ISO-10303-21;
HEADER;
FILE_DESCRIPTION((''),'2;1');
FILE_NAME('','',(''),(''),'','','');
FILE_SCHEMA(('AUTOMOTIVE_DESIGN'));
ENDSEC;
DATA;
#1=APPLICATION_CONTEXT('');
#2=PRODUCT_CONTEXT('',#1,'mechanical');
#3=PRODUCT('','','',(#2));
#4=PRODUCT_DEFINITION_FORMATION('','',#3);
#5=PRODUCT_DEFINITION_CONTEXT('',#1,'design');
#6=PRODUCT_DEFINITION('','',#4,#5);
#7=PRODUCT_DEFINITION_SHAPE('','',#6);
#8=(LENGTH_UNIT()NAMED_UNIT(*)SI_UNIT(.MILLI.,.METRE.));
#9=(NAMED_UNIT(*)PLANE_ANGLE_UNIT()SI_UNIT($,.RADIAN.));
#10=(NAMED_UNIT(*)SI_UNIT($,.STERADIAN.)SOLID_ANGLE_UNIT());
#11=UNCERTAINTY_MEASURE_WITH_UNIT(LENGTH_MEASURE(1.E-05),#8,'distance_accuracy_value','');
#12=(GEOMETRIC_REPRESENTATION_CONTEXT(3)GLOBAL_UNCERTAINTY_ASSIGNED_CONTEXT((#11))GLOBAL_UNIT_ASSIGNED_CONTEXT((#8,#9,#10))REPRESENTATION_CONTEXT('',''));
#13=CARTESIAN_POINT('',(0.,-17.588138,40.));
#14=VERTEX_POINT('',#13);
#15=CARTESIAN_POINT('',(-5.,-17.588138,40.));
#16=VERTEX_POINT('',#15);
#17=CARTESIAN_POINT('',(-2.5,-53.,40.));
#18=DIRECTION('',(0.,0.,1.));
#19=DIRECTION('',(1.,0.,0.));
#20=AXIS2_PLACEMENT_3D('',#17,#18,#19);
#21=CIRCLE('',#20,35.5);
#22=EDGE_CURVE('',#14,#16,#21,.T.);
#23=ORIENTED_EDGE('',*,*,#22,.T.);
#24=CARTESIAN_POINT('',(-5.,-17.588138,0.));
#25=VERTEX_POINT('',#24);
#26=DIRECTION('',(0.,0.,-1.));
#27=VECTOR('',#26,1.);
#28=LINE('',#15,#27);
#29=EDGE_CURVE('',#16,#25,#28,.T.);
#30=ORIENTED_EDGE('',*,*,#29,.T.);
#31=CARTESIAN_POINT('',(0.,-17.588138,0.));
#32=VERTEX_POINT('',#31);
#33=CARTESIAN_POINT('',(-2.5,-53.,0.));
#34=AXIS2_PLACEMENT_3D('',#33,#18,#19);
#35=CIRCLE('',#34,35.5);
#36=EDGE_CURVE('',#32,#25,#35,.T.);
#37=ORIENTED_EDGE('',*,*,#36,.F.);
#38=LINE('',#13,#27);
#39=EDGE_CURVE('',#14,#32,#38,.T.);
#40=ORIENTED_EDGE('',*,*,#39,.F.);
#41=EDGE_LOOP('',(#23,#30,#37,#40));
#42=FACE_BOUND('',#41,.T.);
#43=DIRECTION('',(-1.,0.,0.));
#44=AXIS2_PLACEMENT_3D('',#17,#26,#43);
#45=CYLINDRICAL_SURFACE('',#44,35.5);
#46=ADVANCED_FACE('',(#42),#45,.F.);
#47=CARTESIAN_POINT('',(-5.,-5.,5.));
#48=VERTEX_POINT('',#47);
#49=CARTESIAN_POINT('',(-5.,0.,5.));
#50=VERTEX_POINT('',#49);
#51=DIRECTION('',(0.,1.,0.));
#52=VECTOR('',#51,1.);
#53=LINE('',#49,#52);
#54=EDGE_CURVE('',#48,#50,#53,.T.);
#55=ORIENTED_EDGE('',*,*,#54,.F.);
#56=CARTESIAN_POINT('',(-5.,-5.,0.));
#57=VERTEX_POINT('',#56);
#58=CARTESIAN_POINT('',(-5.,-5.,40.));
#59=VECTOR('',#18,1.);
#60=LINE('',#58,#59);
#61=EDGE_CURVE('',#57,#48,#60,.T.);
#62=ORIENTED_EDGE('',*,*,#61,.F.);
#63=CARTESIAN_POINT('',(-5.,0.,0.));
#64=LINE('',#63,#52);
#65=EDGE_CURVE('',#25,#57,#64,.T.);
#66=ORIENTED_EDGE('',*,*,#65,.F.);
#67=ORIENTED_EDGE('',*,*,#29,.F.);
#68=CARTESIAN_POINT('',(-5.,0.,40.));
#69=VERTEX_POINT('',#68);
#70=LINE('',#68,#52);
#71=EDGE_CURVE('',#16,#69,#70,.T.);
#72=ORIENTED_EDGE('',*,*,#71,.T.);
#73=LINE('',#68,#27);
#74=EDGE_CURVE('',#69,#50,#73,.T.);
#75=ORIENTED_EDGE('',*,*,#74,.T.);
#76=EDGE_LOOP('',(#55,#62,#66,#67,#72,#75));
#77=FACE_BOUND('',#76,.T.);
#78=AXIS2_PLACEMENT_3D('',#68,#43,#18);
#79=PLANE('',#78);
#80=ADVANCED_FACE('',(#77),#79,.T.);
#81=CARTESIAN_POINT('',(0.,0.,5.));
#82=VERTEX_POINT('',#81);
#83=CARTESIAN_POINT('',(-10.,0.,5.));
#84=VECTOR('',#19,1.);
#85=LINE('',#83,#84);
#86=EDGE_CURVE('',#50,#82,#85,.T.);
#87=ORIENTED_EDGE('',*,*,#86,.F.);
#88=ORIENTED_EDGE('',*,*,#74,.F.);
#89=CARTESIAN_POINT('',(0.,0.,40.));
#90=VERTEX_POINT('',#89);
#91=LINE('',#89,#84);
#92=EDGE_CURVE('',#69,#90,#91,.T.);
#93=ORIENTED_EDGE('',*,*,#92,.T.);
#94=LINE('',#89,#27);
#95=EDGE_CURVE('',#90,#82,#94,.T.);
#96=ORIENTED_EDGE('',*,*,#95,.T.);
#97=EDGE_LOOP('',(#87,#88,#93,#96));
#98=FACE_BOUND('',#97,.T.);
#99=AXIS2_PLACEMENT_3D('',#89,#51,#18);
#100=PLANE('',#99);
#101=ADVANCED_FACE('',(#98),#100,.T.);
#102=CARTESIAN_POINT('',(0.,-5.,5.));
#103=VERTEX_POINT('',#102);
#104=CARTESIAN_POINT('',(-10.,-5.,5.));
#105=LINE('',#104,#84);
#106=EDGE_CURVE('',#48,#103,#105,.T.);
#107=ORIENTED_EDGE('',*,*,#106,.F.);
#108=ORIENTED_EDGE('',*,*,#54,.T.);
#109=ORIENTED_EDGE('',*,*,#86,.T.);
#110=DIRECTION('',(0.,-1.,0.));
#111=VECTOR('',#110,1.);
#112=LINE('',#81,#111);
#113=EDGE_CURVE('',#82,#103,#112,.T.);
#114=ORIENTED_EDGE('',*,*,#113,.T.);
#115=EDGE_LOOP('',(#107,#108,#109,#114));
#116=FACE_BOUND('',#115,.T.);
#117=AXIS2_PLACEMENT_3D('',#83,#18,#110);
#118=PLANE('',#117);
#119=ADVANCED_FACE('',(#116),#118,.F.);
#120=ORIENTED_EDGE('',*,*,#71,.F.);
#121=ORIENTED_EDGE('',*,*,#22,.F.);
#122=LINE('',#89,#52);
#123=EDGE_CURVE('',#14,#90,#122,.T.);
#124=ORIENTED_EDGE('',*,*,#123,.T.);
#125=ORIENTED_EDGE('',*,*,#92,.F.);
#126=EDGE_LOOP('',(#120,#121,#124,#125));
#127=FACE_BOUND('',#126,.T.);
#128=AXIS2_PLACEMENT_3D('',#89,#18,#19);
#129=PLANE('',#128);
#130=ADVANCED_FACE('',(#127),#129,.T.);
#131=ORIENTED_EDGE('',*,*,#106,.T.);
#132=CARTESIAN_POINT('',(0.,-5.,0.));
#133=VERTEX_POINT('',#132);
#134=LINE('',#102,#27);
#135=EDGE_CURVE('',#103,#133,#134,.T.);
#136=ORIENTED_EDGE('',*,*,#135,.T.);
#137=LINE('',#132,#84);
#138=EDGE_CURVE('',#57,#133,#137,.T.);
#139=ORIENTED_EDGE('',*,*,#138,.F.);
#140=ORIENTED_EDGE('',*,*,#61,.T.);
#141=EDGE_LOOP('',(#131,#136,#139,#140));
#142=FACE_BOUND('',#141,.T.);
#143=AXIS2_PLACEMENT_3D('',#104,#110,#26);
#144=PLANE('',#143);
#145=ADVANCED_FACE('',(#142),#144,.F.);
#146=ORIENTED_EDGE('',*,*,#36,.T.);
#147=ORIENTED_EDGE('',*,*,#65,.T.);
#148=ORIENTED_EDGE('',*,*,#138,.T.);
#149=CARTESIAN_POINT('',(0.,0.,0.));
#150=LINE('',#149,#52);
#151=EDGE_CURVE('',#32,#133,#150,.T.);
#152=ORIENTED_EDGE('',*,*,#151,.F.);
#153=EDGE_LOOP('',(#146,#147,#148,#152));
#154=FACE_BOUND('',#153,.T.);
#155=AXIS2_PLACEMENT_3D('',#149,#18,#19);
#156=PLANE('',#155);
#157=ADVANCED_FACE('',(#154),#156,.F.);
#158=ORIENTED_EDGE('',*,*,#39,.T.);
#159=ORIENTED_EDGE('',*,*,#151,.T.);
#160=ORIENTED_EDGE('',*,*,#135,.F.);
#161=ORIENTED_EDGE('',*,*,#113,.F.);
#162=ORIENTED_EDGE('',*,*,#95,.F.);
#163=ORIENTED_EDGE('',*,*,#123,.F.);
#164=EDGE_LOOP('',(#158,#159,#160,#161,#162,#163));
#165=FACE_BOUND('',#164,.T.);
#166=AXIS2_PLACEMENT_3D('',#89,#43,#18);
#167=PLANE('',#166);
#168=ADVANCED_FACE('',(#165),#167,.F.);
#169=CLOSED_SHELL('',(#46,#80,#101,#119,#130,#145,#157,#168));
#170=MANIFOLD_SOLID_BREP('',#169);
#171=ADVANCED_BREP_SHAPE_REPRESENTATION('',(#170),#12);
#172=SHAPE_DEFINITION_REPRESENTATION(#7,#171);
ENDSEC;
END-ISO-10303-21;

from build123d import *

# Parameters (mm, degrees)
BOSS_EXTRUDE1_DEPTH = 40
SKETCH2_W           = 5
SKETCH2_H           = 5
CUT_EXTRUDE1_DEPTH  = 10


# Read off the part's stored shape, not the designer's step: Boss-Extrude1
with BuildPart() as part:
    # Boss-Extrude1 outline → Boss-Extrude1 (new body)
    with BuildSketch(Plane.XY):
        with BuildLine():
            Line((-5, 0), (-5, -17.588137581))
            ThreePointArc((-5, -17.588137581), (-2.5, -17.5), (0, -17.588137581))
            Line((0, -17.588137581), (0, 0))
            Line((0, 0), (-5, 0))
        make_face()
    extrude(amount=BOSS_EXTRUDE1_DEPTH)

    # Sketch2 → Cut-Extrude1 (cut)
    with BuildSketch(Plane(origin=(0, 0, 0), x_dir=(0, 0, -1), z_dir=(1, 0, 0))):
        with Locations((-2.5, -2.5)):
            Rectangle(SKETCH2_W, SKETCH2_H)
        with Locations((-17.5, 17.5)):
            Rectangle(SKETCH2_W, SKETCH2_H)
    extrude(amount=-CUT_EXTRUDE1_DEPTH, mode=Mode.SUBTRACT)


solid = part.part
